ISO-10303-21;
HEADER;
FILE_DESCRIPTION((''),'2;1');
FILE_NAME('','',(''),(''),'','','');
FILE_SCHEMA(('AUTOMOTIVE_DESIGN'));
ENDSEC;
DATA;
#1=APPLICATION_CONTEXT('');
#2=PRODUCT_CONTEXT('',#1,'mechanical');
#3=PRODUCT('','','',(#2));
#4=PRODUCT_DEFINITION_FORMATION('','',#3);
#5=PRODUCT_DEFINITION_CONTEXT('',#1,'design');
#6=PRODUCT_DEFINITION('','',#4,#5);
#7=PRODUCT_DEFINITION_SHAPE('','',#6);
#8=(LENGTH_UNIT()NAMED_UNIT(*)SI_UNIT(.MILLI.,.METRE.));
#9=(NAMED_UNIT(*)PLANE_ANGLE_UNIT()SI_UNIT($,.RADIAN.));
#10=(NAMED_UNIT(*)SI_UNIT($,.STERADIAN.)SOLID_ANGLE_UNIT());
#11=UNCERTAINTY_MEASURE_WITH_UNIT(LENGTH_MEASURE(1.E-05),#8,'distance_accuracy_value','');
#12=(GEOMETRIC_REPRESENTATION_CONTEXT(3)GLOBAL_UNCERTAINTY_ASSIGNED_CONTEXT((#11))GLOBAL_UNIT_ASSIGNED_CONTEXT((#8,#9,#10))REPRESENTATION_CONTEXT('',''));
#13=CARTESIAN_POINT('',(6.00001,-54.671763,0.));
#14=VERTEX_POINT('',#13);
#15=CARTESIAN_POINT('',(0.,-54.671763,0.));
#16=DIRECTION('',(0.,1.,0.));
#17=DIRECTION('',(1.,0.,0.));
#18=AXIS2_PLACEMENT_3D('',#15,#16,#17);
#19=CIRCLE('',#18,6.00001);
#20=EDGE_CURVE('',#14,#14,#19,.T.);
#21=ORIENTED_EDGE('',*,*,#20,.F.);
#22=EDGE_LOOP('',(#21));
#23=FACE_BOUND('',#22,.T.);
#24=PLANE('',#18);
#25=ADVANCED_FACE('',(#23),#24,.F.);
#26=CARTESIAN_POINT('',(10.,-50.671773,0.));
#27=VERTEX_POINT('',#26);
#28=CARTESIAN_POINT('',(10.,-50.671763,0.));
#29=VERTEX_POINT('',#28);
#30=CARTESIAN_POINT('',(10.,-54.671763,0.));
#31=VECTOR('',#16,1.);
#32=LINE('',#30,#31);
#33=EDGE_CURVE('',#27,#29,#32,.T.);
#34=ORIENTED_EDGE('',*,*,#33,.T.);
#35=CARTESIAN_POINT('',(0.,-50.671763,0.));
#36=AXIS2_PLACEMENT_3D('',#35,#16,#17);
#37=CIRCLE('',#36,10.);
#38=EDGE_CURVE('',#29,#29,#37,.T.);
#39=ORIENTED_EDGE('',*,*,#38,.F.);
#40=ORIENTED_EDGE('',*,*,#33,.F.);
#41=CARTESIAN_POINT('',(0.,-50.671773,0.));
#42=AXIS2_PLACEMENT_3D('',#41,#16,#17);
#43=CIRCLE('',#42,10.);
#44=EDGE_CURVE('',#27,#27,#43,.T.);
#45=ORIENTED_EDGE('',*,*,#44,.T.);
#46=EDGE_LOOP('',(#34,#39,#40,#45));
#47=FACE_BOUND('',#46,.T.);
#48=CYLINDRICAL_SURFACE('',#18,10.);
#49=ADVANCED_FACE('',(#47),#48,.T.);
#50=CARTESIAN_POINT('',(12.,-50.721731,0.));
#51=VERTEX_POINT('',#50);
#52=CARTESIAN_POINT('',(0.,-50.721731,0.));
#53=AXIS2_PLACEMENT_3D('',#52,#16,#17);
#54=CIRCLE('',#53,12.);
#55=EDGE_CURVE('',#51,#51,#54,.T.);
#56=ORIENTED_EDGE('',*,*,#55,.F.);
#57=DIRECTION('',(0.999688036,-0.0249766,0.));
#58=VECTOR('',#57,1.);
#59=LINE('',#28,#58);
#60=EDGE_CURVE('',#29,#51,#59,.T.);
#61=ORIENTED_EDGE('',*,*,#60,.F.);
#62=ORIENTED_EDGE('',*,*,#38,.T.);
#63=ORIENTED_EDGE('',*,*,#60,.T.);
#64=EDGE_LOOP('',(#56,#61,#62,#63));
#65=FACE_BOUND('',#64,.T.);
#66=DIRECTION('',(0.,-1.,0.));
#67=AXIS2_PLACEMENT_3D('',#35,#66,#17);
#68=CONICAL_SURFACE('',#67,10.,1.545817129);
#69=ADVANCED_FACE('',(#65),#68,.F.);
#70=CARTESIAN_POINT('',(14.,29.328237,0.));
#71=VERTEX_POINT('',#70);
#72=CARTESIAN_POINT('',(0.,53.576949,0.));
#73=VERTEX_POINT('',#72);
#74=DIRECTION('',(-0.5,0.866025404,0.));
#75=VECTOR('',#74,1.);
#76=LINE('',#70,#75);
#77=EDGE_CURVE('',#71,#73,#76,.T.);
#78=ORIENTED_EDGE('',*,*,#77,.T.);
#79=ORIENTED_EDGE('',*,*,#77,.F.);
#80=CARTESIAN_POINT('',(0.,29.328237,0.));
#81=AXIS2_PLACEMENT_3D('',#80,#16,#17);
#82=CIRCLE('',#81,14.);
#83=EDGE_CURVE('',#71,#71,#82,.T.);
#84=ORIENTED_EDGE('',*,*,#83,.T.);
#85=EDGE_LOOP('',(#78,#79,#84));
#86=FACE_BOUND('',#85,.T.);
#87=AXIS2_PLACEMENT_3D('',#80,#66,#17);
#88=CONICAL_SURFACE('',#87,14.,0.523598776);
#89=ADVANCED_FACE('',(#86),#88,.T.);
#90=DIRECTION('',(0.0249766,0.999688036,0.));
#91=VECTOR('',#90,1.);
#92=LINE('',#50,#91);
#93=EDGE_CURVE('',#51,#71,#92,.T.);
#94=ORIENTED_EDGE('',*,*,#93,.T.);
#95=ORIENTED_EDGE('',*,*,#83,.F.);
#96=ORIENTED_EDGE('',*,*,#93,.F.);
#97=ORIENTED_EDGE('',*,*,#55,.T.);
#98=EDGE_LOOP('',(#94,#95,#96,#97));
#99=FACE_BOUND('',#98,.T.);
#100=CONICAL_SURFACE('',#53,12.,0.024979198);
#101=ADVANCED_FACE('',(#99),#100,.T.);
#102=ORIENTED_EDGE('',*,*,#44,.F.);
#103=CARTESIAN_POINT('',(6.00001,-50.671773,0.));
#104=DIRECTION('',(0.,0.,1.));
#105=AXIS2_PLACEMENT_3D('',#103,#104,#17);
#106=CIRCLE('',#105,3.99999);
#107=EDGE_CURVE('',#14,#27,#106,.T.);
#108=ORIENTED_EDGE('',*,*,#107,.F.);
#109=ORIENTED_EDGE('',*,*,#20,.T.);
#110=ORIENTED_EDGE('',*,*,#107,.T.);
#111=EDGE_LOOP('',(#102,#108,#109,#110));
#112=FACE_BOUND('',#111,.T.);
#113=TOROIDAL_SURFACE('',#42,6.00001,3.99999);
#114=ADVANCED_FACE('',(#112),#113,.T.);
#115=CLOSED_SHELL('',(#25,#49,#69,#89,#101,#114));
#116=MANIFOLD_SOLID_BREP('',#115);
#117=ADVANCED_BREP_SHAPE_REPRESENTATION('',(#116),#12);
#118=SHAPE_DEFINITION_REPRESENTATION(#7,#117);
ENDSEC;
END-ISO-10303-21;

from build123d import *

# Parameters (mm, degrees)
F2_R = 3.99999


# Not quite as in the source:
# - a fillet or chamfer is up to 0.001 mm smaller than in the source, because OpenCascade refuses the exact size


with BuildPart() as f1:
    # F0 (on Top) → F1 (revolve)
    with BuildSketch(Plane.XY):
        Polygon((14, 29.3282374667), (0, 53.5769487726), (0, -54.6717625333), (10, -54.6717625333), (10, -50.6717625333), (12, -50.7217313223), align=None)
    revolve(axis=Axis((0, -0.5474068804, 0), (0, 1, 0)))

    # F2 (radius 4 in the source; OpenCascade refuses exactly that, so slightly less here)
    f2_edges = [f1.edges().sort_by_distance(p)[0] for p in [
        (-10, -54.671763, 0),
    ]]
    fillet(f2_edges, radius=F2_R)


solid = f1.part
